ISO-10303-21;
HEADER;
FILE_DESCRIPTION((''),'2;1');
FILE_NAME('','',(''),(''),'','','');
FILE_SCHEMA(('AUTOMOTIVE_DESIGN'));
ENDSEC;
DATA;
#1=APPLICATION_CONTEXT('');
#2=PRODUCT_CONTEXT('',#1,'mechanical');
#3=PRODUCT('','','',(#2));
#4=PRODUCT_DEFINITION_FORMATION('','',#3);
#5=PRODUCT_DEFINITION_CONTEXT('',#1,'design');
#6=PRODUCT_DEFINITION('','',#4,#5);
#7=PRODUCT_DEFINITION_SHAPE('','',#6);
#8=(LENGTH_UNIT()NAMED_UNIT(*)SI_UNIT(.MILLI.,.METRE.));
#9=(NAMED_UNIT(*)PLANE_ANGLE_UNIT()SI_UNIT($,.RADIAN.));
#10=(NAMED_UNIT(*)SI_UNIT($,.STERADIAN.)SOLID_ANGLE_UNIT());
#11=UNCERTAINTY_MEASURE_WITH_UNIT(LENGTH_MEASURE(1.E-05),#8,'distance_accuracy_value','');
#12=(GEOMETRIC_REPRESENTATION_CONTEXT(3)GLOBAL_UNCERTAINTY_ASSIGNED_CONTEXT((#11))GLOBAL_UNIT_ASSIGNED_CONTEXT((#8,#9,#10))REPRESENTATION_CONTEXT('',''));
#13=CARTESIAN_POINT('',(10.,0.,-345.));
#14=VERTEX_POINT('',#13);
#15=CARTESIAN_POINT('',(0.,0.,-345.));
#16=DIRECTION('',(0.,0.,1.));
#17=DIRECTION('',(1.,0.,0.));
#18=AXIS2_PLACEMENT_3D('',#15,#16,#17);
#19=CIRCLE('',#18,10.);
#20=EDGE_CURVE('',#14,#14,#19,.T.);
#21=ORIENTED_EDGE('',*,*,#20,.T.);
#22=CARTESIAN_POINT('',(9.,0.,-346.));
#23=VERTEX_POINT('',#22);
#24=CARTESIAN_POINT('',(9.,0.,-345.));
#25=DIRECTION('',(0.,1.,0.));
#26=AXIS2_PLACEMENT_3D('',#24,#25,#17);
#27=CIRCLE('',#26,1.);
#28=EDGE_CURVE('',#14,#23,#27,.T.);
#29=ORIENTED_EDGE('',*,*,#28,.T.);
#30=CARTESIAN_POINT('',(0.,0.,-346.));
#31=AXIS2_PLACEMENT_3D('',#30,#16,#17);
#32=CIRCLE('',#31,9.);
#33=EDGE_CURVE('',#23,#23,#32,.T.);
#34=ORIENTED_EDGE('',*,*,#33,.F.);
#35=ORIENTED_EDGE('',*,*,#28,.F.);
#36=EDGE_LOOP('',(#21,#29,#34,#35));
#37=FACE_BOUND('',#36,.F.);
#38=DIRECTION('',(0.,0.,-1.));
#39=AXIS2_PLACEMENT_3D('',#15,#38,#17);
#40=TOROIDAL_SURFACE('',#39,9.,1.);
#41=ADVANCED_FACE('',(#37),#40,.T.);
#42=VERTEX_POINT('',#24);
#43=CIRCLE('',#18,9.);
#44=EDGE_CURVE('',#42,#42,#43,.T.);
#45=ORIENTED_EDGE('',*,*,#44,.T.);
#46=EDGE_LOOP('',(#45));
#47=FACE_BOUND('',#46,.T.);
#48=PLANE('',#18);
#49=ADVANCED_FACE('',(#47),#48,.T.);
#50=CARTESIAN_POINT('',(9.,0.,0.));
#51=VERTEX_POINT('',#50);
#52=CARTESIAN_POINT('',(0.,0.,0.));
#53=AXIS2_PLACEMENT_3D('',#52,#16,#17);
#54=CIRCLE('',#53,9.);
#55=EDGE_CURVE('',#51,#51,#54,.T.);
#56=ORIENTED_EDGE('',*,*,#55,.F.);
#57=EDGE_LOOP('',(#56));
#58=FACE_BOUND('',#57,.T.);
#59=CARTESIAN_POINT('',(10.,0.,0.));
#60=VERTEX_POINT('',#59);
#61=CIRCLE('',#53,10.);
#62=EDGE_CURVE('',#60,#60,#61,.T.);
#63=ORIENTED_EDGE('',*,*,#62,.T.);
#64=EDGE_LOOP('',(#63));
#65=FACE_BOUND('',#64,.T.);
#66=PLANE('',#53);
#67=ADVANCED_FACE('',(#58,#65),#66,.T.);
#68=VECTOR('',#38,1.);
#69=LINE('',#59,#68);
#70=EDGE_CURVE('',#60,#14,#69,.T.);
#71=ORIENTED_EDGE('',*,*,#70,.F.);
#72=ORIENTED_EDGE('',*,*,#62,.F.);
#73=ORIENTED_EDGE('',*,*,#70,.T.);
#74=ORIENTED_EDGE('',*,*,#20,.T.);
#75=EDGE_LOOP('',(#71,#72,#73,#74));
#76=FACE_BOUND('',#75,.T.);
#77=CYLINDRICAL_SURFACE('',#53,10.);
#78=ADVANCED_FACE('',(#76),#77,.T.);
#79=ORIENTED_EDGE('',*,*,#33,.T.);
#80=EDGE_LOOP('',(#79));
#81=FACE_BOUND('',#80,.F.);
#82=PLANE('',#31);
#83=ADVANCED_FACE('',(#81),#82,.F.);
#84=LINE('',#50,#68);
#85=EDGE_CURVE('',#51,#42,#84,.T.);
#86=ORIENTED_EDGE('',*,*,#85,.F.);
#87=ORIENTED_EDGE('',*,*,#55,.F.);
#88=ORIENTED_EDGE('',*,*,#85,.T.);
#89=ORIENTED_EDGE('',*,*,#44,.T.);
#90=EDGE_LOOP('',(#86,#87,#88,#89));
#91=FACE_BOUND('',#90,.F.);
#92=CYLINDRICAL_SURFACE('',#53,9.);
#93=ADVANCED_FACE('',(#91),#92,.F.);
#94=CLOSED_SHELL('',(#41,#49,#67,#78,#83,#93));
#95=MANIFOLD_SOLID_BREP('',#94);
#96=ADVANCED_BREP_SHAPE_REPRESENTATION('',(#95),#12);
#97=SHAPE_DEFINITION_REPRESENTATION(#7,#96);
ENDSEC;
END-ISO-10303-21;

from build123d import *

# Parameters (mm, degrees)
F0_R     = 9
F1_DEPTH = 345
F2_T     = 1


# Not quite as in the source:
# - a fillet or chamfer that OpenCascade refuses, or shapes differently, is made with other operations: its cross-section is extruded or revolved along the edge and cut away or added


with BuildPart() as f1:
    # F0 (on Top) → F1 (new body)
    with BuildSketch(Plane.XY):
        Circle(F0_R)
    extrude(amount=-F1_DEPTH)

    # F2
    f2_openings = [f1.faces().sort_by_distance(p)[0] for p in [
        (0, 0, 0),
    ]]
    offset(amount=F2_T, openings=f2_openings, kind=Kind.INTERSECTION)

    # F3: fillet of radius 1 on 1 edges, made by hand

    # F3_s1 → F3_t2 (revolve, cut)
    with BuildSketch(Plane.XZ):
        with BuildLine():
            ThreePointArc((10, -345), (9.7071067812, -345.7071067812), (9, -346))
            Line((9, -346), (10, -346))
            Line((10, -346), (10, -345))
        make_face()
    revolve(axis=Axis((0, 0, -346), (0, 0, 1)), mode=Mode.SUBTRACT)


solid = f1.part
